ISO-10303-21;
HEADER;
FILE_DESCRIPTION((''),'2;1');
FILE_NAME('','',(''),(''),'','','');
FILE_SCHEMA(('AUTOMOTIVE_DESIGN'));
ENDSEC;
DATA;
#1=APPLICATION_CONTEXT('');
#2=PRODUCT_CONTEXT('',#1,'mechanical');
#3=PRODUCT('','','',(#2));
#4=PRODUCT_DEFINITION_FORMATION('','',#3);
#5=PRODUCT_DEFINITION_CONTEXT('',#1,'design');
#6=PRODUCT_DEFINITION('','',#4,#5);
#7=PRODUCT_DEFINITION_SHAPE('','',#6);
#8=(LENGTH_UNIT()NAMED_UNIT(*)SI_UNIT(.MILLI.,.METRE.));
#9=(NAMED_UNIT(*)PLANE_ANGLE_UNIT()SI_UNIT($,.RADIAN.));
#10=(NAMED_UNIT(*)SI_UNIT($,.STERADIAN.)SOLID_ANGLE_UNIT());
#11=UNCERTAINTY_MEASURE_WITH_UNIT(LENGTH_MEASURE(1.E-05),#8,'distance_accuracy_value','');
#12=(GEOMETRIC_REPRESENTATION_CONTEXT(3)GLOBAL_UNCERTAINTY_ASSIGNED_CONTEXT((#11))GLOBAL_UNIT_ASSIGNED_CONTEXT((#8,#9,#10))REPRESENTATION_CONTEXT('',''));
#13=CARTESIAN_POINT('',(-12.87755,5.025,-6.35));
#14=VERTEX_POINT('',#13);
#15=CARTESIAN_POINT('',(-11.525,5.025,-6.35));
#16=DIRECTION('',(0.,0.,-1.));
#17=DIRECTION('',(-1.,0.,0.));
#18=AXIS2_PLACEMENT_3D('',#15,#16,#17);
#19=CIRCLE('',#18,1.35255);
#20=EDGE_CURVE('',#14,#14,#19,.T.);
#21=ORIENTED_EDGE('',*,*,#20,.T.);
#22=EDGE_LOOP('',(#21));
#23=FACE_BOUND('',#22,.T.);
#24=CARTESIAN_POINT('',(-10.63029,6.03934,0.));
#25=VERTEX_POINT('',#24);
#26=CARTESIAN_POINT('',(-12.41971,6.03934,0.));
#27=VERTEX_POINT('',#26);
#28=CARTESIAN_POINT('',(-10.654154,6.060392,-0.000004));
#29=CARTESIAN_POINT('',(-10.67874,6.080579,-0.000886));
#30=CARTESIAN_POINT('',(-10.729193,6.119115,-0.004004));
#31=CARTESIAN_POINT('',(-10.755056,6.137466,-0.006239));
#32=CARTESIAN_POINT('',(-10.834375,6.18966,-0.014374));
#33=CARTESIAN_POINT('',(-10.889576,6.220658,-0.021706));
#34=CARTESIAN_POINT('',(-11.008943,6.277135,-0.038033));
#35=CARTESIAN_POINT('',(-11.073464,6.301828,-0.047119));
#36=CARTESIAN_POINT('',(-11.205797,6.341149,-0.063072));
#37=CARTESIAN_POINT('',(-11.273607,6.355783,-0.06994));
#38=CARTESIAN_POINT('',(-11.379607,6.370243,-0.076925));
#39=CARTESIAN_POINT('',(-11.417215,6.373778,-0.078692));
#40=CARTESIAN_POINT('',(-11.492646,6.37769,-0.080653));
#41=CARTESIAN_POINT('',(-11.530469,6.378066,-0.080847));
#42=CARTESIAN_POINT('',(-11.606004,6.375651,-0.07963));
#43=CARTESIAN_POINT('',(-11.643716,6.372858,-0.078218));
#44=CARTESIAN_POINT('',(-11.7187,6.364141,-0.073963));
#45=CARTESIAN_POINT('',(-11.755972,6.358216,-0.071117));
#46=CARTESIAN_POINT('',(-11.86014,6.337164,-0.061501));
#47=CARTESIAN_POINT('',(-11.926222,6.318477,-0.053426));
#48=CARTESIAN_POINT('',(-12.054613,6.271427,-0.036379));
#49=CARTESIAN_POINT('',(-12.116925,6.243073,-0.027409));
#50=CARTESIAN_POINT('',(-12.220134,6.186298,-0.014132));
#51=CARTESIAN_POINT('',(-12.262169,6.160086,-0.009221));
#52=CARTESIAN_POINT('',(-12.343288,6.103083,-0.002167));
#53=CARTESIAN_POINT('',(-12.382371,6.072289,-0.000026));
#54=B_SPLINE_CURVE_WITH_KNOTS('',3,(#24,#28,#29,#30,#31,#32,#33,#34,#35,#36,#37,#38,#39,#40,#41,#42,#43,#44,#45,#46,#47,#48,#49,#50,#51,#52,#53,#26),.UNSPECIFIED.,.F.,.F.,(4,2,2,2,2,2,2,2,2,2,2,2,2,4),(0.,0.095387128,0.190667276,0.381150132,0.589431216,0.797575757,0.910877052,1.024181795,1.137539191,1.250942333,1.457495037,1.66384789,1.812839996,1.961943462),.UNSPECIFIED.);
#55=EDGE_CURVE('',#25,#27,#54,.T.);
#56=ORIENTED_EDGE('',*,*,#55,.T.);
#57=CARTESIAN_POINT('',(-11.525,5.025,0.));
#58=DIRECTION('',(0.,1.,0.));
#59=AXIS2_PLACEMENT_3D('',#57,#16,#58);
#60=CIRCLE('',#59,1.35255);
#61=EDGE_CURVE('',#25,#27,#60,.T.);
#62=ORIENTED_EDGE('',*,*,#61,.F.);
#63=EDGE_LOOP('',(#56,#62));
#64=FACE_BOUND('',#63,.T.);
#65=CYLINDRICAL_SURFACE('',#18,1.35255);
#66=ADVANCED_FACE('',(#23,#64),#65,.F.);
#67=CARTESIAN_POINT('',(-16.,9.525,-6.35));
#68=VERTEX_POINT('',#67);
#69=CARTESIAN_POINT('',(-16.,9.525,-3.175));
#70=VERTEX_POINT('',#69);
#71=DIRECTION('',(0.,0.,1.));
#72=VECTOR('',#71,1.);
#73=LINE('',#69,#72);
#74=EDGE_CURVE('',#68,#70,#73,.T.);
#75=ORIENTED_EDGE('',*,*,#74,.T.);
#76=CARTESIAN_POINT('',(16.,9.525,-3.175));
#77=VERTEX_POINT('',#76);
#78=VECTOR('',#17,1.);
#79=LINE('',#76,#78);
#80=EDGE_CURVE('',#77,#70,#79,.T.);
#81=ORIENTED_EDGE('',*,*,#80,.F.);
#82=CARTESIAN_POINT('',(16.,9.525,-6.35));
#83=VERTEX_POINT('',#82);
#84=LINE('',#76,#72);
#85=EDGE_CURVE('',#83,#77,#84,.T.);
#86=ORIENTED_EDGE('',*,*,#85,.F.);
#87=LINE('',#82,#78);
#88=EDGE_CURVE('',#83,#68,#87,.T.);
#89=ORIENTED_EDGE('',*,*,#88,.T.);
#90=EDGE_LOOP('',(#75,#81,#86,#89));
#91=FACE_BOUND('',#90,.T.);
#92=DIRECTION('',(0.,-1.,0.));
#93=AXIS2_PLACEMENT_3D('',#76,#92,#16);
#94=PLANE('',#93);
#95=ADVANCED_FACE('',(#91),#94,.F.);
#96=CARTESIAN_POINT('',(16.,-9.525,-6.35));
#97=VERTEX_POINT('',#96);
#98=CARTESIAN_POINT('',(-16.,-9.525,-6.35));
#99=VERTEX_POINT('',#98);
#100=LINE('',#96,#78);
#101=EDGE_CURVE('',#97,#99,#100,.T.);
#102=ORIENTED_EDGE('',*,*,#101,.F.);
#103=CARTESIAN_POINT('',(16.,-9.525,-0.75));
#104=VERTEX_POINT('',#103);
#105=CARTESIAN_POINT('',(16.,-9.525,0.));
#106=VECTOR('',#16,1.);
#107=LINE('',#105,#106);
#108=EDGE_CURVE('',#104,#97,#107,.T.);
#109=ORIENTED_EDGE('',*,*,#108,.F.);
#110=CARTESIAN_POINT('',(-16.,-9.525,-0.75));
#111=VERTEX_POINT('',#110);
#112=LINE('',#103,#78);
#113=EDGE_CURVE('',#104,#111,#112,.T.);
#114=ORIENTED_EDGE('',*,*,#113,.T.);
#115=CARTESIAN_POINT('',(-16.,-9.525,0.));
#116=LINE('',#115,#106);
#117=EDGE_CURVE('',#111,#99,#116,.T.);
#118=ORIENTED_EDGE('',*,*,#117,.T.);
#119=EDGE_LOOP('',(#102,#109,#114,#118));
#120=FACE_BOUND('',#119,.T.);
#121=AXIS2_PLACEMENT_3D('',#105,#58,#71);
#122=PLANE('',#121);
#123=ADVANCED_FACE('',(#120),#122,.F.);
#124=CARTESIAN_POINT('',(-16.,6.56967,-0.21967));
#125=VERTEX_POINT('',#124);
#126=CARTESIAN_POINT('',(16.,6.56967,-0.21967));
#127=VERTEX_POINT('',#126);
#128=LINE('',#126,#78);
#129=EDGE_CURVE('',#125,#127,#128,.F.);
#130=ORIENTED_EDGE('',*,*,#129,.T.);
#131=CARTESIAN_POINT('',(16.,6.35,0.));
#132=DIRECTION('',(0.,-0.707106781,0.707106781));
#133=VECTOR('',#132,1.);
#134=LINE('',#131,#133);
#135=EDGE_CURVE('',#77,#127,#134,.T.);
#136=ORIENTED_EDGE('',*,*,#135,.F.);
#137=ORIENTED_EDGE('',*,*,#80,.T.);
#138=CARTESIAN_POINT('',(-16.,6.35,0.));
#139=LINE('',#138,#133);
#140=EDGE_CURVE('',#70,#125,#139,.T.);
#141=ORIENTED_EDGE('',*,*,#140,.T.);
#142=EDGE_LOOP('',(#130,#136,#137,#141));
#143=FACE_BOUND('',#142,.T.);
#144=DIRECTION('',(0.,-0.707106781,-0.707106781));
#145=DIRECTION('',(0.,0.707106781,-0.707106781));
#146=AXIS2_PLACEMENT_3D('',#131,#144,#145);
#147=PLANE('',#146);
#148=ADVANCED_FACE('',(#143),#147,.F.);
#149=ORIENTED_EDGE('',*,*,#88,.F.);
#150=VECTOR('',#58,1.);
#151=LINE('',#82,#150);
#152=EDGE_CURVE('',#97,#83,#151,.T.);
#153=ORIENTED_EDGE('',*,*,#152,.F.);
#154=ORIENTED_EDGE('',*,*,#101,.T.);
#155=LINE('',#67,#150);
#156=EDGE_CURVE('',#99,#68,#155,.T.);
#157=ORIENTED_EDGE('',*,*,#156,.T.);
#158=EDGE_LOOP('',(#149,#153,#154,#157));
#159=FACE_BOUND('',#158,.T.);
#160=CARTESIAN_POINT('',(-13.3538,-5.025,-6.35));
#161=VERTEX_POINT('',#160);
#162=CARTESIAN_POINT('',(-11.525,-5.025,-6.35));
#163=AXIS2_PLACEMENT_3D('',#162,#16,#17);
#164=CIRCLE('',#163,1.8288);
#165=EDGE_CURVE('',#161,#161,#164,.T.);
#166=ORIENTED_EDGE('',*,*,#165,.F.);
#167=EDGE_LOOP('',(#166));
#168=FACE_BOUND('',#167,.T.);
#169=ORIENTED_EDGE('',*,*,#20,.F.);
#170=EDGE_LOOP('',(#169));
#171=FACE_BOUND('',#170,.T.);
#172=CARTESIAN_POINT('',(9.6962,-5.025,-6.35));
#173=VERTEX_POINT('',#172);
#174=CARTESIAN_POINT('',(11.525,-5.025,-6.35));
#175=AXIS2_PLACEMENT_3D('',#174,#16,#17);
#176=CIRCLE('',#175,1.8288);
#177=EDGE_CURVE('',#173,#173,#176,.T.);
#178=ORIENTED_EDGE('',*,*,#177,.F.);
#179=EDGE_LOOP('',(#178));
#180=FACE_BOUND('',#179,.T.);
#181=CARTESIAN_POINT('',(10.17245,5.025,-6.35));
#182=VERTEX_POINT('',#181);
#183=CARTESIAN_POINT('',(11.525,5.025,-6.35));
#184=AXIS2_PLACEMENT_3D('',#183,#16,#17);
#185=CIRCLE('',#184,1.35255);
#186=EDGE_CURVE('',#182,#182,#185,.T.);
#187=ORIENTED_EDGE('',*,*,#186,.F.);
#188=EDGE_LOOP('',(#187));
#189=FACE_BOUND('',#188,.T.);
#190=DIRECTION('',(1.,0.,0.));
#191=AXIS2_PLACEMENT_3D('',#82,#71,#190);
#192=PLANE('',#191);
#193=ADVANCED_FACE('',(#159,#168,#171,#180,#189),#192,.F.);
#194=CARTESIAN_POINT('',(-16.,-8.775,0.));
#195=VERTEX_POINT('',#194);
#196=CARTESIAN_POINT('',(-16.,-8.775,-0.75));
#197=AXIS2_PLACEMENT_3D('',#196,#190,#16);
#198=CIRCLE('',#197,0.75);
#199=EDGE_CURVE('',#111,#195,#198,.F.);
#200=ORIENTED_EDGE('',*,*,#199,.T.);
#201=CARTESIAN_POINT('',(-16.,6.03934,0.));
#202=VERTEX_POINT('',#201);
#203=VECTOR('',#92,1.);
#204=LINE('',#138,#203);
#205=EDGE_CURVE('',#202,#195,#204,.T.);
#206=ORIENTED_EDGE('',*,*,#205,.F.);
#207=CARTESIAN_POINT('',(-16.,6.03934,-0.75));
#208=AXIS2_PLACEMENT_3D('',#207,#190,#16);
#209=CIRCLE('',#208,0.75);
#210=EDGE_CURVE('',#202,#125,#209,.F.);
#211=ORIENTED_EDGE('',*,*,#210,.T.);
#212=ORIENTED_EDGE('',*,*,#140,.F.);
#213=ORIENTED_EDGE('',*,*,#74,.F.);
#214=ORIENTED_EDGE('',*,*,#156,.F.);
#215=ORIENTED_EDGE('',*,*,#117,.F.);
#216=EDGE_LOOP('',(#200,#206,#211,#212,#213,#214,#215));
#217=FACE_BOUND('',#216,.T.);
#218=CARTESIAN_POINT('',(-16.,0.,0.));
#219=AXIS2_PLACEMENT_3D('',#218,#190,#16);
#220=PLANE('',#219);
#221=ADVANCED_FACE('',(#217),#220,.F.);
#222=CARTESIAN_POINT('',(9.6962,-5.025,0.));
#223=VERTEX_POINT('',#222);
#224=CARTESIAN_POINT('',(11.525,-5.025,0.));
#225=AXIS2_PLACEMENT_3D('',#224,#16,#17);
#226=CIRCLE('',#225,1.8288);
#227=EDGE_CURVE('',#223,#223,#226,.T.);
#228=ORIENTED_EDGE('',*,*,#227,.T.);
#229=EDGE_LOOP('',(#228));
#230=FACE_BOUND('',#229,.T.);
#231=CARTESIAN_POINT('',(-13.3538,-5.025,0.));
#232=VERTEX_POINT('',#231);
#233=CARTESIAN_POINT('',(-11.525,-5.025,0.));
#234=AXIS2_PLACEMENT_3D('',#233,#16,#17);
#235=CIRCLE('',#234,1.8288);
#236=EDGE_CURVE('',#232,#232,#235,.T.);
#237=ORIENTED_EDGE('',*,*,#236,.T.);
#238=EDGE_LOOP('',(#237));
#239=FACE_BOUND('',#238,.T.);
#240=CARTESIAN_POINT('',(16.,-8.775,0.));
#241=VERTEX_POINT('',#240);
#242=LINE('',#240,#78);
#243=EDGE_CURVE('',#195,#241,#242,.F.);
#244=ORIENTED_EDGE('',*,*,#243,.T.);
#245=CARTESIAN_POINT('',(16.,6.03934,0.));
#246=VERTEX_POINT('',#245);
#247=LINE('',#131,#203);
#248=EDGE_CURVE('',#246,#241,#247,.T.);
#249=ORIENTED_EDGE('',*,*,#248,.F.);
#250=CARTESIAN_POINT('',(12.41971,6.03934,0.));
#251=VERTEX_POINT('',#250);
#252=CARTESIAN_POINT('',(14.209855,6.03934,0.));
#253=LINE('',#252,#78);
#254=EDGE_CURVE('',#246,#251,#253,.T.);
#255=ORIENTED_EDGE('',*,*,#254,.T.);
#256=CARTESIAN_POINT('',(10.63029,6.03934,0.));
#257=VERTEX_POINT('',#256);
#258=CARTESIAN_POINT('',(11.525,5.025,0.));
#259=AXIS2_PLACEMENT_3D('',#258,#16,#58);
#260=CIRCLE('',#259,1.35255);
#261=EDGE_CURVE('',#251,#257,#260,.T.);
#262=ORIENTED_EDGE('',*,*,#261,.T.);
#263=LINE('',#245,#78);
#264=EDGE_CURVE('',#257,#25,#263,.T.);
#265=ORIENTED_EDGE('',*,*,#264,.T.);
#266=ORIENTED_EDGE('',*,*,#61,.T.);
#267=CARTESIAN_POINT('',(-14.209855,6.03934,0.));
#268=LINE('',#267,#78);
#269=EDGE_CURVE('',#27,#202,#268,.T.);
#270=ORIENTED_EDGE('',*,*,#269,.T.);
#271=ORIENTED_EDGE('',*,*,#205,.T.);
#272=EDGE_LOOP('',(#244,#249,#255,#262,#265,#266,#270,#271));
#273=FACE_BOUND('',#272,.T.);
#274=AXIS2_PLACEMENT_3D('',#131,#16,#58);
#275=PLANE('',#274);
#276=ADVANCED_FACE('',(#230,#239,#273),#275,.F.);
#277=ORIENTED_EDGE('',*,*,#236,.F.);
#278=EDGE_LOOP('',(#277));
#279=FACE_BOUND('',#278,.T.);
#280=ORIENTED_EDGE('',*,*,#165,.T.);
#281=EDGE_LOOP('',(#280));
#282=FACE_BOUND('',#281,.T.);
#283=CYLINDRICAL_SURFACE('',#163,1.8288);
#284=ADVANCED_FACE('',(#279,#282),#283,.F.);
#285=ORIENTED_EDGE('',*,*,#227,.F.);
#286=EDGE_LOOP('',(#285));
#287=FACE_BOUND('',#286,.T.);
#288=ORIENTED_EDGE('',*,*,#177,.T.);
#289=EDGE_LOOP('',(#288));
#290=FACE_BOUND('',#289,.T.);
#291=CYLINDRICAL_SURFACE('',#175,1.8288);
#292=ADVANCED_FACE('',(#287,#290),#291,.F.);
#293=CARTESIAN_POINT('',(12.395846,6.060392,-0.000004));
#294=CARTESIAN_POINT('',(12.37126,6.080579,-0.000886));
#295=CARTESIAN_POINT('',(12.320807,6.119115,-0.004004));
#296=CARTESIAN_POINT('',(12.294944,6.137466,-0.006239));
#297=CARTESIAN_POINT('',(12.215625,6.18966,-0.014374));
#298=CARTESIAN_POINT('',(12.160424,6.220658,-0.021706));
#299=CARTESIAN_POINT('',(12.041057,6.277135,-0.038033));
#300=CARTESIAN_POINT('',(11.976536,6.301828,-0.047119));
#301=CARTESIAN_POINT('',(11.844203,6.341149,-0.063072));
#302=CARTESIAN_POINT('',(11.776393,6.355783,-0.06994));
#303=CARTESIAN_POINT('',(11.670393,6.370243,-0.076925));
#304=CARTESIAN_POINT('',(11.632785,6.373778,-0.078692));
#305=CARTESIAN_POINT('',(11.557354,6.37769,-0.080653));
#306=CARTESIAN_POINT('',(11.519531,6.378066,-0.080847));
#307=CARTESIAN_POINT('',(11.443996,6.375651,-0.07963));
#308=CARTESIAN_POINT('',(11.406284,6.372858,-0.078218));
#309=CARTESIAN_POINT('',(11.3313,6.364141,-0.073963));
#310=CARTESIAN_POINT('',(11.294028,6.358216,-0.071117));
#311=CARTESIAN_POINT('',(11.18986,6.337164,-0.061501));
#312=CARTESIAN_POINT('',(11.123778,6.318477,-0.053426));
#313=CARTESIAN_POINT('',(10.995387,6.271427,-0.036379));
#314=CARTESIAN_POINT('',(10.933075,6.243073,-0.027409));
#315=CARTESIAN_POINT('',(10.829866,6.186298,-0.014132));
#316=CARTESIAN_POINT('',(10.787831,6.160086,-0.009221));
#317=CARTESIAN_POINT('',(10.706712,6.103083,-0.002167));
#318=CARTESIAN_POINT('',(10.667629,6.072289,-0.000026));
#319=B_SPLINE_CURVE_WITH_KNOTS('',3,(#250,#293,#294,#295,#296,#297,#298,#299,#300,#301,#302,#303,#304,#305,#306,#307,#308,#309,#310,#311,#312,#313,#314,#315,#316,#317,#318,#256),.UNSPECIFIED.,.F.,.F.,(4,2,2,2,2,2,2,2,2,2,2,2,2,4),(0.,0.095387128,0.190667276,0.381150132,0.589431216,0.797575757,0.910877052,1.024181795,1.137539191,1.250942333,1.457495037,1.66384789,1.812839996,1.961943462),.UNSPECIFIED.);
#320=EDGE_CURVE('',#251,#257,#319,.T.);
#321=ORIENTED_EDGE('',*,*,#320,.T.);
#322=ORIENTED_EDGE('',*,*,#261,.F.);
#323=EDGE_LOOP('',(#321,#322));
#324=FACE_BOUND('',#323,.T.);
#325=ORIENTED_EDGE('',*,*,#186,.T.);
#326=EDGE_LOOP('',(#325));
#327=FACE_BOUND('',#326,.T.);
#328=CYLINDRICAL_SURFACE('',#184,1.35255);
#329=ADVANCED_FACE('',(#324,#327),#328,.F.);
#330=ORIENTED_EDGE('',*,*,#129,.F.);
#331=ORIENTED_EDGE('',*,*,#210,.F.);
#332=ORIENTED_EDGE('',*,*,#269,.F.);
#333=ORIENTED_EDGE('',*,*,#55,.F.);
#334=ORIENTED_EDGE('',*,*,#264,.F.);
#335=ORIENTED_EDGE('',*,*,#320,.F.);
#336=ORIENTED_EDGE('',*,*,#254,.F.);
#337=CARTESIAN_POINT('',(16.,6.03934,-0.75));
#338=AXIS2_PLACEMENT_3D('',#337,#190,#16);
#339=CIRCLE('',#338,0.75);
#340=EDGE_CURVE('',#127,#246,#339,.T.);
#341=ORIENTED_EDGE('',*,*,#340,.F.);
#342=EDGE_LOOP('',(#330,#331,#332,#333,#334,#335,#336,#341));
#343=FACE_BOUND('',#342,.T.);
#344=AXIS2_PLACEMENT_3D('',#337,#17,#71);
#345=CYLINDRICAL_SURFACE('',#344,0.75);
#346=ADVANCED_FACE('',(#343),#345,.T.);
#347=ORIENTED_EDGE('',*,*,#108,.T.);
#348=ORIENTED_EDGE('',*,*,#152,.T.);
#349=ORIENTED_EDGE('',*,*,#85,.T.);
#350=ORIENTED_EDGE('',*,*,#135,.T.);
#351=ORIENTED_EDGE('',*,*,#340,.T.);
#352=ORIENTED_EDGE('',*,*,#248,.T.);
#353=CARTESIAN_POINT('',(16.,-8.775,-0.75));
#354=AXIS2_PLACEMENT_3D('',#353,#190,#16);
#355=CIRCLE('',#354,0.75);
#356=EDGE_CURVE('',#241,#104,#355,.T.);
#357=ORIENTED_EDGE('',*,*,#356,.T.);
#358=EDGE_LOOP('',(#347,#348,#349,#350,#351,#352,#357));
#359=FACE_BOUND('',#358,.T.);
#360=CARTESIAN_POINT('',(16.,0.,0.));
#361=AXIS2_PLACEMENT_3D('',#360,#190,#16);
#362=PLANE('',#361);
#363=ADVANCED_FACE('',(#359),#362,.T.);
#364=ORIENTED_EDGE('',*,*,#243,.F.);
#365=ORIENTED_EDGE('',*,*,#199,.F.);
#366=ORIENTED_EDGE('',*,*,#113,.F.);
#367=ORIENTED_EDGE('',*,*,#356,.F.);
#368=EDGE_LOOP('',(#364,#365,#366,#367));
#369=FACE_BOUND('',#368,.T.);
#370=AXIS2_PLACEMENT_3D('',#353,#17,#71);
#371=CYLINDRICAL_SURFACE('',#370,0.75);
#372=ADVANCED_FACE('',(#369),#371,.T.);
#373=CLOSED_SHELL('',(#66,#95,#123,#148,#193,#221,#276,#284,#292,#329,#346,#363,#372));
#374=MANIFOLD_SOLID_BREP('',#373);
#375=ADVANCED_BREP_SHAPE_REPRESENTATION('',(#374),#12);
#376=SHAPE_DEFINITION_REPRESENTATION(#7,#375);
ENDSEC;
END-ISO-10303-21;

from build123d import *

# Parameters (mm, degrees)
BOSS_EXTRUDE1_DEPTH       = 16
F_6_32_TAPPED_HOLE1_D     = 2.7051
F_6_32_TAPPED_HOLE1_DEPTH = 9.398
F_6_32_TAPPED_HOLE1_TIP   = 0.81269403
FILLET1_R                 = 0.75
F_6_CLEARANCE_HOLE2_D     = 3.6576


with BuildPart() as part:
    # Sketch1 → Boss-Extrude1 (new, symmetric)
    with BuildSketch(Plane(origin=(0, 0, 0), x_dir=(0, 0, -1), z_dir=(1, 0, 0))):
        Polygon((0, 6.35), (3.175, 9.525), (6.35, 9.525), (6.35, -9.525), (0, -9.525), align=None)
    extrude(amount=BOSS_EXTRUDE1_DEPTH, both=True)

    # #6-32 Tapped Hole1
    with Locations(Plane(origin=(0, 0, -6.35), x_dir=(-1, 0, 0), z_dir=(0, 0, -1))):
        with Locations((11.525, 5.025), (-11.525, 5.025)):
            Hole(F_6_32_TAPPED_HOLE1_D / 2, depth=F_6_32_TAPPED_HOLE1_DEPTH)
            with Locations((0, 0, -(F_6_32_TAPPED_HOLE1_DEPTH + F_6_32_TAPPED_HOLE1_TIP / 2))):  # 118° drill point
                Cone(0, F_6_32_TAPPED_HOLE1_D / 2, F_6_32_TAPPED_HOLE1_TIP, mode=Mode.SUBTRACT)

    # Fillet1
    # the kernel refuses this fillet: 0.75 mm, written as the material it takes off along each edge
    with BuildSketch(Plane(origin=(-16.776650429, 6.35, 0), x_dir=(0, 0.707106781186552, -0.7071067811865431), z_dir=(1, 0, 0)), Plane(origin=(11.019949465, 6.35, 0), x_dir=(0, 0.707106781186552, -0.7071067811865431), z_dir=(1, 0, 0))) as fillet1_piece_1:
        with BuildLine():
            CenterArc((FILLET1_R * 0.414213562373, -FILLET1_R), FILLET1_R, 90, 45)
            Line((-FILLET1_R * 0.292893218813, -FILLET1_R * 0.292893218813), (0, 0))
            Line((0, 0), (FILLET1_R * 0.414213562373, 0))
        make_face()
    extrude(amount=5.756700965, mode=Mode.SUBTRACT)
    with BuildSketch(Plane(origin=(-12.030050535, 6.35, 0), x_dir=(0, 0.707106781186552, -0.7071067811865431), z_dir=(1, 0, 0))) as fillet1_piece_2:
        with BuildLine():
            CenterArc((FILLET1_R * 0.414213562373, -FILLET1_R), FILLET1_R, 90, 45)
            Line((-FILLET1_R * 0.292893218813, -FILLET1_R * 0.292893218813), (0, 0))
            Line((0, 0), (FILLET1_R * 0.414213562373, 0))
        make_face()
    extrude(amount=24.060101071, mode=Mode.SUBTRACT)
    with BuildSketch(Plane(origin=(-17.875, -9.525, 0), x_dir=(0, 1, 0), z_dir=(1, 0, 0))) as fillet1_piece_3:
        with BuildLine():
            CenterArc((FILLET1_R, -FILLET1_R), FILLET1_R, 90, 90)
            Line((0, -FILLET1_R), (0, 0))
            Line((0, 0), (FILLET1_R, 0))
        make_face()
    extrude(amount=35.75, mode=Mode.SUBTRACT)

    # #6 Clearance Hole2 (through all)
    with Locations(Plane(origin=(0, 0, -6.35), x_dir=(-1, 0, 0), z_dir=(0, 0, -1))):
        with Locations((-11.525, -5.025), (11.525, -5.025)):
            Hole(F_6_CLEARANCE_HOLE2_D / 2)


solid = part.part
